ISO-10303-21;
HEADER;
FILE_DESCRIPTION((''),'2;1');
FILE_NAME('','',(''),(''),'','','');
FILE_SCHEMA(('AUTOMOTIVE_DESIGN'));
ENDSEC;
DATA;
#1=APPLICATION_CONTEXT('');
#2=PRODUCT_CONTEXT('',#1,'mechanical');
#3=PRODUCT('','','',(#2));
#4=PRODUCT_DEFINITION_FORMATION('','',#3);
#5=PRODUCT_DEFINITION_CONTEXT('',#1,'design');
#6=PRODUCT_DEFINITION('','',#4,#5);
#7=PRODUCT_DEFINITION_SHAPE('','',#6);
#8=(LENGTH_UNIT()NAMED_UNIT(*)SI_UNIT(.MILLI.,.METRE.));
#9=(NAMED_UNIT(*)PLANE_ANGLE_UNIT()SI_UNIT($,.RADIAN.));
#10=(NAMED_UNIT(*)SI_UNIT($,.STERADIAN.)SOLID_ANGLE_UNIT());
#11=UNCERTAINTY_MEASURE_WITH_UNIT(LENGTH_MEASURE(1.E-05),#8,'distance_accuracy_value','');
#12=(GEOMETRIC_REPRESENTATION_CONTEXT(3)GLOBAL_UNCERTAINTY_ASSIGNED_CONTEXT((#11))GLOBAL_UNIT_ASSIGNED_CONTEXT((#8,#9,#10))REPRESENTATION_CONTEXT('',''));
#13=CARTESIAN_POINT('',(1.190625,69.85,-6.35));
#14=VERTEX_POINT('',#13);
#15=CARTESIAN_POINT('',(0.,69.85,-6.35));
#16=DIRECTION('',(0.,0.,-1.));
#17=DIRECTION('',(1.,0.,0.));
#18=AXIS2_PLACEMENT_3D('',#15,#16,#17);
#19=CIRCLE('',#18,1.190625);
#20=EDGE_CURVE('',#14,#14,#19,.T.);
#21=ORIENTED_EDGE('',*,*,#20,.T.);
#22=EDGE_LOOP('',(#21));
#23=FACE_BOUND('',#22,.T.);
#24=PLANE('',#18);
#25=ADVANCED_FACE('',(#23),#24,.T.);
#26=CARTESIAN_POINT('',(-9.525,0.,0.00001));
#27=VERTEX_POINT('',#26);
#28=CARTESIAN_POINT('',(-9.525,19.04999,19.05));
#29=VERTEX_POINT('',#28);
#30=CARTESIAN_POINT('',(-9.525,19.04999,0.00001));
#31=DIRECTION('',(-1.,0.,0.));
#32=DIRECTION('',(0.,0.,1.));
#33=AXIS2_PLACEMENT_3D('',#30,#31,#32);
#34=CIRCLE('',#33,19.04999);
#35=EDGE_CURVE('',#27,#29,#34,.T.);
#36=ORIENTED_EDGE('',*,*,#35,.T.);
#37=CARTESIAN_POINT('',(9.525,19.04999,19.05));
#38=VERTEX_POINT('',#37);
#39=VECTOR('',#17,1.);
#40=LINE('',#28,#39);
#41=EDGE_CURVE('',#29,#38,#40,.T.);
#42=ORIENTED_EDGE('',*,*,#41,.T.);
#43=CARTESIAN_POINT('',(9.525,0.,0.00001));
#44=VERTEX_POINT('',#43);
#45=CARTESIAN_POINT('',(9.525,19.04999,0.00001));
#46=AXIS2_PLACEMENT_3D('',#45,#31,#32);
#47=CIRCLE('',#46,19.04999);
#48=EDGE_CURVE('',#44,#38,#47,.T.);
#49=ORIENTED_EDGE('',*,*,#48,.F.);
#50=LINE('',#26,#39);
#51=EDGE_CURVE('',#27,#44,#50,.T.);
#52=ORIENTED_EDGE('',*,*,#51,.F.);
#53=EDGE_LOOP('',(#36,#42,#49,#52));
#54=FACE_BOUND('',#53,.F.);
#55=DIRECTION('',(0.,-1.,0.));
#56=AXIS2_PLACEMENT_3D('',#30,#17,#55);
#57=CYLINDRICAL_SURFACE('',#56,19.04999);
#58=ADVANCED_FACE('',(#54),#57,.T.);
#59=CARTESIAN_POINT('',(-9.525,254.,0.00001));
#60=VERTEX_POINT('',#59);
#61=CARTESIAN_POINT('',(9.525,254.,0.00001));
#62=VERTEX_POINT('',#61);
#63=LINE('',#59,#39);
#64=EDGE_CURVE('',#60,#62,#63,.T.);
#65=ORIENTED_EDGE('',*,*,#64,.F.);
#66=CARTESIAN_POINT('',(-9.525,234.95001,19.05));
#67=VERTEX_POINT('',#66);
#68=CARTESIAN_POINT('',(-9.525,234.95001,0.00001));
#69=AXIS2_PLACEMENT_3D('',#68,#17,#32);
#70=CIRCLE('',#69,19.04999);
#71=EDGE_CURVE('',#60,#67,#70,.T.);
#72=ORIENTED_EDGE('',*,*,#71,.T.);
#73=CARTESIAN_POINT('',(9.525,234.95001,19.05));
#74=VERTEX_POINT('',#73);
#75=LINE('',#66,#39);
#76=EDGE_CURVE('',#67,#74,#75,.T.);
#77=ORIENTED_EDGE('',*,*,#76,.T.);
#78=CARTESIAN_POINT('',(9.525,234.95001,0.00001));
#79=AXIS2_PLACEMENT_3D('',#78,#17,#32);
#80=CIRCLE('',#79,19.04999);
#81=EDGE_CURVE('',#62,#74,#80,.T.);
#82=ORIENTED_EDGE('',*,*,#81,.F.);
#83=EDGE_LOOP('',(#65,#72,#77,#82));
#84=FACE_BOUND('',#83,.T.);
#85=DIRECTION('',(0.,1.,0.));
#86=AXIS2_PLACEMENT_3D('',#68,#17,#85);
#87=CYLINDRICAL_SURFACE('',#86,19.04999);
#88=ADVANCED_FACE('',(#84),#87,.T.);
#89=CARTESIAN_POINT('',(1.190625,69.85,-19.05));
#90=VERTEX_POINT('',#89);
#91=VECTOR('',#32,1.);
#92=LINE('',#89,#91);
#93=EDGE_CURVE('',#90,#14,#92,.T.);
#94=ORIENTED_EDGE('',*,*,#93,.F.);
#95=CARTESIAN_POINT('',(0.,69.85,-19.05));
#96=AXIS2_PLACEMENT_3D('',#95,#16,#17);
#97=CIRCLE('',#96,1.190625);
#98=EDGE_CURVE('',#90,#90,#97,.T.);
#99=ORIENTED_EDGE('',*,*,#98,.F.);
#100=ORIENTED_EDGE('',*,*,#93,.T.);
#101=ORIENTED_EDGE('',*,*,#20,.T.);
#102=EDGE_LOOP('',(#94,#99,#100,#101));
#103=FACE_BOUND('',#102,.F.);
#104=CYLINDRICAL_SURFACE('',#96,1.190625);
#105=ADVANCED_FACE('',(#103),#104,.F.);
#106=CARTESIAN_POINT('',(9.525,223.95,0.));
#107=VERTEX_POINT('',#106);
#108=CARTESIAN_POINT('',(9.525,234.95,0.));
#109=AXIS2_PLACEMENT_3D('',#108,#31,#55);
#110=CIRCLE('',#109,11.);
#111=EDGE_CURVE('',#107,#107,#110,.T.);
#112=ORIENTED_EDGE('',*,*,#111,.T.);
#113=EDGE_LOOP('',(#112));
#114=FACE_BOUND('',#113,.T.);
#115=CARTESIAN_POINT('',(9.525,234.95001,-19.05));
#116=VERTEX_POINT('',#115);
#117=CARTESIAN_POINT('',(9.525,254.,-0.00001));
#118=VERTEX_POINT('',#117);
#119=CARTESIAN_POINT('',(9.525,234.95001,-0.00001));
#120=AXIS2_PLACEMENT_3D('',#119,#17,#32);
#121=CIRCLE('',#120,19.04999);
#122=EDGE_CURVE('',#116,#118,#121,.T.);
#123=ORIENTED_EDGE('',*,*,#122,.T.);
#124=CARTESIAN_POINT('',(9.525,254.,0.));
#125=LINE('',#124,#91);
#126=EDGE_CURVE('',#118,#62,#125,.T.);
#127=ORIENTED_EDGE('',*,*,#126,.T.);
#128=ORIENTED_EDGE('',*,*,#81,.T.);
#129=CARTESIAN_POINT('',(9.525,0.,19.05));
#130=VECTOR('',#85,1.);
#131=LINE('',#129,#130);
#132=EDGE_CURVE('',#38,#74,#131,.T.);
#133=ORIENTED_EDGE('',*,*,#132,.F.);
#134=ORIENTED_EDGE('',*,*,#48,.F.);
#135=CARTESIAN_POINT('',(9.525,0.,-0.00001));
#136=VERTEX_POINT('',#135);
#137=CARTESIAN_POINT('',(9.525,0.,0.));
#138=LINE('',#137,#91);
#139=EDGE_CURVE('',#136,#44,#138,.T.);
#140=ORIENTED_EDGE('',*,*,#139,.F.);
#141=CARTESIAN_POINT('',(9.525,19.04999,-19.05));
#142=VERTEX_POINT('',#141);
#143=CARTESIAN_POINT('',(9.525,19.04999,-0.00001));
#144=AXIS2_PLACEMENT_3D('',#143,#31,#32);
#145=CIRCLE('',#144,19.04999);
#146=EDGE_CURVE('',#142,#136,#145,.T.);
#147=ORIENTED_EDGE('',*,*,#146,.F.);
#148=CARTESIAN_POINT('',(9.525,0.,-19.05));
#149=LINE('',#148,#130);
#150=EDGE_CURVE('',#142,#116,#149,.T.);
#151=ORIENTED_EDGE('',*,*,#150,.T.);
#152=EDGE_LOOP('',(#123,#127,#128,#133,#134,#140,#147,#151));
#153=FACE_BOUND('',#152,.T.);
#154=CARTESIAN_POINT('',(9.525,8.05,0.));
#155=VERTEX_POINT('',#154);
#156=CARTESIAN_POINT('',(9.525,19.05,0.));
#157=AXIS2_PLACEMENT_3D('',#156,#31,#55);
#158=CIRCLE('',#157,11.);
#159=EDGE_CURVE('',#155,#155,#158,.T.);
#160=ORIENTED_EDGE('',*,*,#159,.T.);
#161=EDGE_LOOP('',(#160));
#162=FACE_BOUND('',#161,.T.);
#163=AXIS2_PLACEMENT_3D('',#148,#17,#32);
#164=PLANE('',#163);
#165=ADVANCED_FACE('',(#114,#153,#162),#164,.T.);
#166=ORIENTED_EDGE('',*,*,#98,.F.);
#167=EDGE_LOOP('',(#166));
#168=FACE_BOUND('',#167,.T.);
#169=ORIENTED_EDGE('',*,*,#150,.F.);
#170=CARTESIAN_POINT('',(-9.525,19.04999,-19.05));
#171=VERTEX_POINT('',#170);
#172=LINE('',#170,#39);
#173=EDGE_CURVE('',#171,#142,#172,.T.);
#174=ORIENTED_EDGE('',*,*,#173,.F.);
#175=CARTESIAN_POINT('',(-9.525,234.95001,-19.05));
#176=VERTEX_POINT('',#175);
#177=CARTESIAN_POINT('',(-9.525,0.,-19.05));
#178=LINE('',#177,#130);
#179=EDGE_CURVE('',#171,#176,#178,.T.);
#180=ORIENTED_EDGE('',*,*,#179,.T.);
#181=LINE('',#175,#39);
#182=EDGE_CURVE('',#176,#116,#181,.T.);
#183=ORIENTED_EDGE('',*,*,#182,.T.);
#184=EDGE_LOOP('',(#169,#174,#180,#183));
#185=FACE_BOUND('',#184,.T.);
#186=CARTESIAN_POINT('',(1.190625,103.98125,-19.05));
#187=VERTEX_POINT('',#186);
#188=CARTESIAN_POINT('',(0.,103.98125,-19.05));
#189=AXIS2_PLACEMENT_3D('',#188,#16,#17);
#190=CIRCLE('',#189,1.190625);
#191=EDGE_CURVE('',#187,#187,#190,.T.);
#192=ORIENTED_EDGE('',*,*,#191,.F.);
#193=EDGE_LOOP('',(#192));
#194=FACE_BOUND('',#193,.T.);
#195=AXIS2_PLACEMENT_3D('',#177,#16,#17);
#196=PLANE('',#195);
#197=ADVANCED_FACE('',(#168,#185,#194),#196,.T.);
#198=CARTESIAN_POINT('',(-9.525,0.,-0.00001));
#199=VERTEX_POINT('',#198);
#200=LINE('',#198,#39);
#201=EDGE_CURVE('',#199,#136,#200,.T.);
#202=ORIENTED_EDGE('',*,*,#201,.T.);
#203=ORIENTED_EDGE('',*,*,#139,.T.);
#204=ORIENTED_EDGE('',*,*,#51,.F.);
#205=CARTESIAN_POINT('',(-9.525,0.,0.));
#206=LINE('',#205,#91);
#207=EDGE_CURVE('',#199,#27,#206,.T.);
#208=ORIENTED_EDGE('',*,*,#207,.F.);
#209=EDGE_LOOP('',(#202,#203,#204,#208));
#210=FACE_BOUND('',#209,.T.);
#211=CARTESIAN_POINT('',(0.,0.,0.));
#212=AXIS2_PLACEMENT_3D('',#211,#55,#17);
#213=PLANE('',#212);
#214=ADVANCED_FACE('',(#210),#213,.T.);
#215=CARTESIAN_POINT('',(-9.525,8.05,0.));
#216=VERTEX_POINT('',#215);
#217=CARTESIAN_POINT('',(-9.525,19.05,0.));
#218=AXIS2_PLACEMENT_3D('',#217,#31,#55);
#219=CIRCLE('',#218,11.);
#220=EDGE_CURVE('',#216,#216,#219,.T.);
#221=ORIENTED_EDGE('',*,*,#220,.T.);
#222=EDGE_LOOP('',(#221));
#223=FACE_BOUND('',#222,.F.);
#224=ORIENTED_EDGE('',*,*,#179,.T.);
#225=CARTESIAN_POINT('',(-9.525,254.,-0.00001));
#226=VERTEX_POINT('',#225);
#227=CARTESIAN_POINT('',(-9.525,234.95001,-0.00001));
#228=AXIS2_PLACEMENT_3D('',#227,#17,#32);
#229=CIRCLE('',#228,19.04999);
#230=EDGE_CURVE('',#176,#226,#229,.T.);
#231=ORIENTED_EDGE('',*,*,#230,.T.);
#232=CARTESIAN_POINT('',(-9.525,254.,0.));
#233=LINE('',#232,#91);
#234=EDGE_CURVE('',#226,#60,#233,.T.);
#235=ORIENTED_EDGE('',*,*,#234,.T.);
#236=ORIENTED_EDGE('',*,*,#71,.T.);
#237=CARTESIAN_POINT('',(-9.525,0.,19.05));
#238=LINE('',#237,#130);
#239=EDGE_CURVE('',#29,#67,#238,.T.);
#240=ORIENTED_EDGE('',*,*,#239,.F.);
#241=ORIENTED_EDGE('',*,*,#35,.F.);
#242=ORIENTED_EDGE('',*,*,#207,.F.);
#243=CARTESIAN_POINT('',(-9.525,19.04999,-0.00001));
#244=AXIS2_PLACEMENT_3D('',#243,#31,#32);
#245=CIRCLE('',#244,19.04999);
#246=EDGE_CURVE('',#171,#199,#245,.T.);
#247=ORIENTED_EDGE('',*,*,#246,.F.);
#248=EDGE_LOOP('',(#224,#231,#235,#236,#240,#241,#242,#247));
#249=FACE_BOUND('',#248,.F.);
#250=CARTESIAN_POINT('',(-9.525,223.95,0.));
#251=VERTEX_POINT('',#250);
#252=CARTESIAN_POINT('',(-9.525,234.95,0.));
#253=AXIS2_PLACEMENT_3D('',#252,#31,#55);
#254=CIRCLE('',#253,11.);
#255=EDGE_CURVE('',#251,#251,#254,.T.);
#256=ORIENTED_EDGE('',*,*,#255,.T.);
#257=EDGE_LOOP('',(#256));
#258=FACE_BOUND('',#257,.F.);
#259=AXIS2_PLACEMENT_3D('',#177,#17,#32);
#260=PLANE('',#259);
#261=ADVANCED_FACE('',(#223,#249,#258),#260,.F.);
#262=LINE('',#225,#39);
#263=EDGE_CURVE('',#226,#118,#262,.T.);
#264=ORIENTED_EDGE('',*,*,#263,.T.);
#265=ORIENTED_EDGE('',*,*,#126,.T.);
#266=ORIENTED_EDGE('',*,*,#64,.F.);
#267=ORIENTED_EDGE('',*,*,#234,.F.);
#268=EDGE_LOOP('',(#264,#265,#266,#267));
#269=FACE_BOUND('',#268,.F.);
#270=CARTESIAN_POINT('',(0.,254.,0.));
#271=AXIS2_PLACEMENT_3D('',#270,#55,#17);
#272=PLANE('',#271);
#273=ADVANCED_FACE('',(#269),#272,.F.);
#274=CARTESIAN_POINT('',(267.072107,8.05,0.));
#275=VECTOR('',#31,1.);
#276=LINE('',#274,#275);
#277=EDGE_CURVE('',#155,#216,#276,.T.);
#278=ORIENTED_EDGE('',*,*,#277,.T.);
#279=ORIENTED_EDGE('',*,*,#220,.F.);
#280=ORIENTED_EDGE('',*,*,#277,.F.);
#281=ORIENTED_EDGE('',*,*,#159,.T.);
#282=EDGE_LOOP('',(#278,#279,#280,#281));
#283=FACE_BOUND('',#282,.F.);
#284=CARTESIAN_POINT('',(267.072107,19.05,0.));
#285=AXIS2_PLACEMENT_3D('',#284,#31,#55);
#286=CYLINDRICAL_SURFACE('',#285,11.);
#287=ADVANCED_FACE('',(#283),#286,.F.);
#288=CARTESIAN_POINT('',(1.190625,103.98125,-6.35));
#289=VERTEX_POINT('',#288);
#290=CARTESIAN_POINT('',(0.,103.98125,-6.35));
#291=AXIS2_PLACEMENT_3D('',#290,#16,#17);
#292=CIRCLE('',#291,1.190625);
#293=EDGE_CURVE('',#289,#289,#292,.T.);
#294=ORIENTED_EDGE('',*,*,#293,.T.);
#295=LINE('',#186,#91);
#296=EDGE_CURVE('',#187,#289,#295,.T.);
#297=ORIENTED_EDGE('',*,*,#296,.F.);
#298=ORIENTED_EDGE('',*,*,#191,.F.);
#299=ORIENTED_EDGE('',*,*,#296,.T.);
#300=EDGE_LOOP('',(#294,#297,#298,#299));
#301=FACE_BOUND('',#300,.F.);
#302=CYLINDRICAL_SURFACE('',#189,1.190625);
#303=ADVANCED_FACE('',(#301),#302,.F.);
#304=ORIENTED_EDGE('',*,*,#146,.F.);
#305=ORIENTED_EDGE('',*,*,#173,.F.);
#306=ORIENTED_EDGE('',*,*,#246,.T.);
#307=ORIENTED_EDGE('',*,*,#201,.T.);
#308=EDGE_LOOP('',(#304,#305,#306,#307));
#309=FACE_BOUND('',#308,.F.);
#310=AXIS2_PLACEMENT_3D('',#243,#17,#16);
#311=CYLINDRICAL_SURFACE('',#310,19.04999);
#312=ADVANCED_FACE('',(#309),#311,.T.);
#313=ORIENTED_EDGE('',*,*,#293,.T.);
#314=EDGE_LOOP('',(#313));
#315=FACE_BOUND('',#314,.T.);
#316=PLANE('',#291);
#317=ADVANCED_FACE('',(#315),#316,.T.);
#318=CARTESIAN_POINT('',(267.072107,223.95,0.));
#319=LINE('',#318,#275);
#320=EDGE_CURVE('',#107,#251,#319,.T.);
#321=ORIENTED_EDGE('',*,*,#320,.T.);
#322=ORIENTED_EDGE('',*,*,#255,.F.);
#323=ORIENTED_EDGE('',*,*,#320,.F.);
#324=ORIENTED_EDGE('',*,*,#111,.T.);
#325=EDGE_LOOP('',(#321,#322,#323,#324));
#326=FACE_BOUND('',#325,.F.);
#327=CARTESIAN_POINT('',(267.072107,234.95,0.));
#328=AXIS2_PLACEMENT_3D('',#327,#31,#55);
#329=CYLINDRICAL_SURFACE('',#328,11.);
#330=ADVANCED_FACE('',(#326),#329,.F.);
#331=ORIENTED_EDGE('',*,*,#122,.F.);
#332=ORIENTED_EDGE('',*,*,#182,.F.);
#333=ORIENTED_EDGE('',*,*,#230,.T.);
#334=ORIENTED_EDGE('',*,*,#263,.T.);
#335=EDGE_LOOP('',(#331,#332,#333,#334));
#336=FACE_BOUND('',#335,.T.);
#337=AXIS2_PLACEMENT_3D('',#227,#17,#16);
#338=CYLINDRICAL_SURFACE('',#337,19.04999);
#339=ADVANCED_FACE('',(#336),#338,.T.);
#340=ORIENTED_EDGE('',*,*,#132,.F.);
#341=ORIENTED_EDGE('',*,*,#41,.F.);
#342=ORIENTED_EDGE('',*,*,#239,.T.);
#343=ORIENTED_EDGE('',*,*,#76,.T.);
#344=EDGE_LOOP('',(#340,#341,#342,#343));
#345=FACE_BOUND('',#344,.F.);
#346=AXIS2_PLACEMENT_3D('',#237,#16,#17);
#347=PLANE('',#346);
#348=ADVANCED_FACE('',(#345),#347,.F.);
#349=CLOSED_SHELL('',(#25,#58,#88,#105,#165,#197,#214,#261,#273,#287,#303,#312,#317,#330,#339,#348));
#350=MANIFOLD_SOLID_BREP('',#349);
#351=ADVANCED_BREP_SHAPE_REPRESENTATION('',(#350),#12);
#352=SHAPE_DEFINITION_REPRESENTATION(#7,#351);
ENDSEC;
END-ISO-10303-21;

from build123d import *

# Parameters (mm, degrees)
F0_W     = 19.05
F0_H     = 38.1
F1_DEPTH = 254
F3_D     = 22
F4_R     = 19.04999
F5_R     = 1.190625
F6_DEPTH = 12.7


# Not quite as in the source:
# - a fillet or chamfer is up to 0.001 mm smaller than in the source, because OpenCascade refuses the exact size


with BuildPart() as f1:
    # F0 (on Front) → F1 (new body)
    with BuildSketch(Plane.XZ):
        Rectangle(F0_W, F0_H)
    extrude(amount=-F1_DEPTH)

    # F3 (through all)
    with Locations(Plane.YZ.offset(9.525)):
        with Locations((19.05, 0), (234.95, 0)):
            Hole(F3_D / 2)

    # F4 (radius 19.05 in the source; OpenCascade refuses exactly that, so slightly less here)
    f4_edges = [f1.edges().sort_by_distance(p)[0] for p in [
        (0, 0, 19.05),
        (0, 0, -19.05),
        (0, 254, 19.05),
        (0, 254, -19.05),
    ]]
    fillet(f4_edges, radius=F4_R)

    # F5 (on face) → F6 (cut)
    with BuildSketch(Plane(origin=(0, 0, -19.05), x_dir=(1, 0, 0), z_dir=(0, 0, -1))):
        with Locations((0, -103.98125)):
            Circle(F5_R)
        with Locations((0, -69.85)):
            Circle(F5_R)
    extrude(amount=-F6_DEPTH, mode=Mode.SUBTRACT)


solid = f1.part
